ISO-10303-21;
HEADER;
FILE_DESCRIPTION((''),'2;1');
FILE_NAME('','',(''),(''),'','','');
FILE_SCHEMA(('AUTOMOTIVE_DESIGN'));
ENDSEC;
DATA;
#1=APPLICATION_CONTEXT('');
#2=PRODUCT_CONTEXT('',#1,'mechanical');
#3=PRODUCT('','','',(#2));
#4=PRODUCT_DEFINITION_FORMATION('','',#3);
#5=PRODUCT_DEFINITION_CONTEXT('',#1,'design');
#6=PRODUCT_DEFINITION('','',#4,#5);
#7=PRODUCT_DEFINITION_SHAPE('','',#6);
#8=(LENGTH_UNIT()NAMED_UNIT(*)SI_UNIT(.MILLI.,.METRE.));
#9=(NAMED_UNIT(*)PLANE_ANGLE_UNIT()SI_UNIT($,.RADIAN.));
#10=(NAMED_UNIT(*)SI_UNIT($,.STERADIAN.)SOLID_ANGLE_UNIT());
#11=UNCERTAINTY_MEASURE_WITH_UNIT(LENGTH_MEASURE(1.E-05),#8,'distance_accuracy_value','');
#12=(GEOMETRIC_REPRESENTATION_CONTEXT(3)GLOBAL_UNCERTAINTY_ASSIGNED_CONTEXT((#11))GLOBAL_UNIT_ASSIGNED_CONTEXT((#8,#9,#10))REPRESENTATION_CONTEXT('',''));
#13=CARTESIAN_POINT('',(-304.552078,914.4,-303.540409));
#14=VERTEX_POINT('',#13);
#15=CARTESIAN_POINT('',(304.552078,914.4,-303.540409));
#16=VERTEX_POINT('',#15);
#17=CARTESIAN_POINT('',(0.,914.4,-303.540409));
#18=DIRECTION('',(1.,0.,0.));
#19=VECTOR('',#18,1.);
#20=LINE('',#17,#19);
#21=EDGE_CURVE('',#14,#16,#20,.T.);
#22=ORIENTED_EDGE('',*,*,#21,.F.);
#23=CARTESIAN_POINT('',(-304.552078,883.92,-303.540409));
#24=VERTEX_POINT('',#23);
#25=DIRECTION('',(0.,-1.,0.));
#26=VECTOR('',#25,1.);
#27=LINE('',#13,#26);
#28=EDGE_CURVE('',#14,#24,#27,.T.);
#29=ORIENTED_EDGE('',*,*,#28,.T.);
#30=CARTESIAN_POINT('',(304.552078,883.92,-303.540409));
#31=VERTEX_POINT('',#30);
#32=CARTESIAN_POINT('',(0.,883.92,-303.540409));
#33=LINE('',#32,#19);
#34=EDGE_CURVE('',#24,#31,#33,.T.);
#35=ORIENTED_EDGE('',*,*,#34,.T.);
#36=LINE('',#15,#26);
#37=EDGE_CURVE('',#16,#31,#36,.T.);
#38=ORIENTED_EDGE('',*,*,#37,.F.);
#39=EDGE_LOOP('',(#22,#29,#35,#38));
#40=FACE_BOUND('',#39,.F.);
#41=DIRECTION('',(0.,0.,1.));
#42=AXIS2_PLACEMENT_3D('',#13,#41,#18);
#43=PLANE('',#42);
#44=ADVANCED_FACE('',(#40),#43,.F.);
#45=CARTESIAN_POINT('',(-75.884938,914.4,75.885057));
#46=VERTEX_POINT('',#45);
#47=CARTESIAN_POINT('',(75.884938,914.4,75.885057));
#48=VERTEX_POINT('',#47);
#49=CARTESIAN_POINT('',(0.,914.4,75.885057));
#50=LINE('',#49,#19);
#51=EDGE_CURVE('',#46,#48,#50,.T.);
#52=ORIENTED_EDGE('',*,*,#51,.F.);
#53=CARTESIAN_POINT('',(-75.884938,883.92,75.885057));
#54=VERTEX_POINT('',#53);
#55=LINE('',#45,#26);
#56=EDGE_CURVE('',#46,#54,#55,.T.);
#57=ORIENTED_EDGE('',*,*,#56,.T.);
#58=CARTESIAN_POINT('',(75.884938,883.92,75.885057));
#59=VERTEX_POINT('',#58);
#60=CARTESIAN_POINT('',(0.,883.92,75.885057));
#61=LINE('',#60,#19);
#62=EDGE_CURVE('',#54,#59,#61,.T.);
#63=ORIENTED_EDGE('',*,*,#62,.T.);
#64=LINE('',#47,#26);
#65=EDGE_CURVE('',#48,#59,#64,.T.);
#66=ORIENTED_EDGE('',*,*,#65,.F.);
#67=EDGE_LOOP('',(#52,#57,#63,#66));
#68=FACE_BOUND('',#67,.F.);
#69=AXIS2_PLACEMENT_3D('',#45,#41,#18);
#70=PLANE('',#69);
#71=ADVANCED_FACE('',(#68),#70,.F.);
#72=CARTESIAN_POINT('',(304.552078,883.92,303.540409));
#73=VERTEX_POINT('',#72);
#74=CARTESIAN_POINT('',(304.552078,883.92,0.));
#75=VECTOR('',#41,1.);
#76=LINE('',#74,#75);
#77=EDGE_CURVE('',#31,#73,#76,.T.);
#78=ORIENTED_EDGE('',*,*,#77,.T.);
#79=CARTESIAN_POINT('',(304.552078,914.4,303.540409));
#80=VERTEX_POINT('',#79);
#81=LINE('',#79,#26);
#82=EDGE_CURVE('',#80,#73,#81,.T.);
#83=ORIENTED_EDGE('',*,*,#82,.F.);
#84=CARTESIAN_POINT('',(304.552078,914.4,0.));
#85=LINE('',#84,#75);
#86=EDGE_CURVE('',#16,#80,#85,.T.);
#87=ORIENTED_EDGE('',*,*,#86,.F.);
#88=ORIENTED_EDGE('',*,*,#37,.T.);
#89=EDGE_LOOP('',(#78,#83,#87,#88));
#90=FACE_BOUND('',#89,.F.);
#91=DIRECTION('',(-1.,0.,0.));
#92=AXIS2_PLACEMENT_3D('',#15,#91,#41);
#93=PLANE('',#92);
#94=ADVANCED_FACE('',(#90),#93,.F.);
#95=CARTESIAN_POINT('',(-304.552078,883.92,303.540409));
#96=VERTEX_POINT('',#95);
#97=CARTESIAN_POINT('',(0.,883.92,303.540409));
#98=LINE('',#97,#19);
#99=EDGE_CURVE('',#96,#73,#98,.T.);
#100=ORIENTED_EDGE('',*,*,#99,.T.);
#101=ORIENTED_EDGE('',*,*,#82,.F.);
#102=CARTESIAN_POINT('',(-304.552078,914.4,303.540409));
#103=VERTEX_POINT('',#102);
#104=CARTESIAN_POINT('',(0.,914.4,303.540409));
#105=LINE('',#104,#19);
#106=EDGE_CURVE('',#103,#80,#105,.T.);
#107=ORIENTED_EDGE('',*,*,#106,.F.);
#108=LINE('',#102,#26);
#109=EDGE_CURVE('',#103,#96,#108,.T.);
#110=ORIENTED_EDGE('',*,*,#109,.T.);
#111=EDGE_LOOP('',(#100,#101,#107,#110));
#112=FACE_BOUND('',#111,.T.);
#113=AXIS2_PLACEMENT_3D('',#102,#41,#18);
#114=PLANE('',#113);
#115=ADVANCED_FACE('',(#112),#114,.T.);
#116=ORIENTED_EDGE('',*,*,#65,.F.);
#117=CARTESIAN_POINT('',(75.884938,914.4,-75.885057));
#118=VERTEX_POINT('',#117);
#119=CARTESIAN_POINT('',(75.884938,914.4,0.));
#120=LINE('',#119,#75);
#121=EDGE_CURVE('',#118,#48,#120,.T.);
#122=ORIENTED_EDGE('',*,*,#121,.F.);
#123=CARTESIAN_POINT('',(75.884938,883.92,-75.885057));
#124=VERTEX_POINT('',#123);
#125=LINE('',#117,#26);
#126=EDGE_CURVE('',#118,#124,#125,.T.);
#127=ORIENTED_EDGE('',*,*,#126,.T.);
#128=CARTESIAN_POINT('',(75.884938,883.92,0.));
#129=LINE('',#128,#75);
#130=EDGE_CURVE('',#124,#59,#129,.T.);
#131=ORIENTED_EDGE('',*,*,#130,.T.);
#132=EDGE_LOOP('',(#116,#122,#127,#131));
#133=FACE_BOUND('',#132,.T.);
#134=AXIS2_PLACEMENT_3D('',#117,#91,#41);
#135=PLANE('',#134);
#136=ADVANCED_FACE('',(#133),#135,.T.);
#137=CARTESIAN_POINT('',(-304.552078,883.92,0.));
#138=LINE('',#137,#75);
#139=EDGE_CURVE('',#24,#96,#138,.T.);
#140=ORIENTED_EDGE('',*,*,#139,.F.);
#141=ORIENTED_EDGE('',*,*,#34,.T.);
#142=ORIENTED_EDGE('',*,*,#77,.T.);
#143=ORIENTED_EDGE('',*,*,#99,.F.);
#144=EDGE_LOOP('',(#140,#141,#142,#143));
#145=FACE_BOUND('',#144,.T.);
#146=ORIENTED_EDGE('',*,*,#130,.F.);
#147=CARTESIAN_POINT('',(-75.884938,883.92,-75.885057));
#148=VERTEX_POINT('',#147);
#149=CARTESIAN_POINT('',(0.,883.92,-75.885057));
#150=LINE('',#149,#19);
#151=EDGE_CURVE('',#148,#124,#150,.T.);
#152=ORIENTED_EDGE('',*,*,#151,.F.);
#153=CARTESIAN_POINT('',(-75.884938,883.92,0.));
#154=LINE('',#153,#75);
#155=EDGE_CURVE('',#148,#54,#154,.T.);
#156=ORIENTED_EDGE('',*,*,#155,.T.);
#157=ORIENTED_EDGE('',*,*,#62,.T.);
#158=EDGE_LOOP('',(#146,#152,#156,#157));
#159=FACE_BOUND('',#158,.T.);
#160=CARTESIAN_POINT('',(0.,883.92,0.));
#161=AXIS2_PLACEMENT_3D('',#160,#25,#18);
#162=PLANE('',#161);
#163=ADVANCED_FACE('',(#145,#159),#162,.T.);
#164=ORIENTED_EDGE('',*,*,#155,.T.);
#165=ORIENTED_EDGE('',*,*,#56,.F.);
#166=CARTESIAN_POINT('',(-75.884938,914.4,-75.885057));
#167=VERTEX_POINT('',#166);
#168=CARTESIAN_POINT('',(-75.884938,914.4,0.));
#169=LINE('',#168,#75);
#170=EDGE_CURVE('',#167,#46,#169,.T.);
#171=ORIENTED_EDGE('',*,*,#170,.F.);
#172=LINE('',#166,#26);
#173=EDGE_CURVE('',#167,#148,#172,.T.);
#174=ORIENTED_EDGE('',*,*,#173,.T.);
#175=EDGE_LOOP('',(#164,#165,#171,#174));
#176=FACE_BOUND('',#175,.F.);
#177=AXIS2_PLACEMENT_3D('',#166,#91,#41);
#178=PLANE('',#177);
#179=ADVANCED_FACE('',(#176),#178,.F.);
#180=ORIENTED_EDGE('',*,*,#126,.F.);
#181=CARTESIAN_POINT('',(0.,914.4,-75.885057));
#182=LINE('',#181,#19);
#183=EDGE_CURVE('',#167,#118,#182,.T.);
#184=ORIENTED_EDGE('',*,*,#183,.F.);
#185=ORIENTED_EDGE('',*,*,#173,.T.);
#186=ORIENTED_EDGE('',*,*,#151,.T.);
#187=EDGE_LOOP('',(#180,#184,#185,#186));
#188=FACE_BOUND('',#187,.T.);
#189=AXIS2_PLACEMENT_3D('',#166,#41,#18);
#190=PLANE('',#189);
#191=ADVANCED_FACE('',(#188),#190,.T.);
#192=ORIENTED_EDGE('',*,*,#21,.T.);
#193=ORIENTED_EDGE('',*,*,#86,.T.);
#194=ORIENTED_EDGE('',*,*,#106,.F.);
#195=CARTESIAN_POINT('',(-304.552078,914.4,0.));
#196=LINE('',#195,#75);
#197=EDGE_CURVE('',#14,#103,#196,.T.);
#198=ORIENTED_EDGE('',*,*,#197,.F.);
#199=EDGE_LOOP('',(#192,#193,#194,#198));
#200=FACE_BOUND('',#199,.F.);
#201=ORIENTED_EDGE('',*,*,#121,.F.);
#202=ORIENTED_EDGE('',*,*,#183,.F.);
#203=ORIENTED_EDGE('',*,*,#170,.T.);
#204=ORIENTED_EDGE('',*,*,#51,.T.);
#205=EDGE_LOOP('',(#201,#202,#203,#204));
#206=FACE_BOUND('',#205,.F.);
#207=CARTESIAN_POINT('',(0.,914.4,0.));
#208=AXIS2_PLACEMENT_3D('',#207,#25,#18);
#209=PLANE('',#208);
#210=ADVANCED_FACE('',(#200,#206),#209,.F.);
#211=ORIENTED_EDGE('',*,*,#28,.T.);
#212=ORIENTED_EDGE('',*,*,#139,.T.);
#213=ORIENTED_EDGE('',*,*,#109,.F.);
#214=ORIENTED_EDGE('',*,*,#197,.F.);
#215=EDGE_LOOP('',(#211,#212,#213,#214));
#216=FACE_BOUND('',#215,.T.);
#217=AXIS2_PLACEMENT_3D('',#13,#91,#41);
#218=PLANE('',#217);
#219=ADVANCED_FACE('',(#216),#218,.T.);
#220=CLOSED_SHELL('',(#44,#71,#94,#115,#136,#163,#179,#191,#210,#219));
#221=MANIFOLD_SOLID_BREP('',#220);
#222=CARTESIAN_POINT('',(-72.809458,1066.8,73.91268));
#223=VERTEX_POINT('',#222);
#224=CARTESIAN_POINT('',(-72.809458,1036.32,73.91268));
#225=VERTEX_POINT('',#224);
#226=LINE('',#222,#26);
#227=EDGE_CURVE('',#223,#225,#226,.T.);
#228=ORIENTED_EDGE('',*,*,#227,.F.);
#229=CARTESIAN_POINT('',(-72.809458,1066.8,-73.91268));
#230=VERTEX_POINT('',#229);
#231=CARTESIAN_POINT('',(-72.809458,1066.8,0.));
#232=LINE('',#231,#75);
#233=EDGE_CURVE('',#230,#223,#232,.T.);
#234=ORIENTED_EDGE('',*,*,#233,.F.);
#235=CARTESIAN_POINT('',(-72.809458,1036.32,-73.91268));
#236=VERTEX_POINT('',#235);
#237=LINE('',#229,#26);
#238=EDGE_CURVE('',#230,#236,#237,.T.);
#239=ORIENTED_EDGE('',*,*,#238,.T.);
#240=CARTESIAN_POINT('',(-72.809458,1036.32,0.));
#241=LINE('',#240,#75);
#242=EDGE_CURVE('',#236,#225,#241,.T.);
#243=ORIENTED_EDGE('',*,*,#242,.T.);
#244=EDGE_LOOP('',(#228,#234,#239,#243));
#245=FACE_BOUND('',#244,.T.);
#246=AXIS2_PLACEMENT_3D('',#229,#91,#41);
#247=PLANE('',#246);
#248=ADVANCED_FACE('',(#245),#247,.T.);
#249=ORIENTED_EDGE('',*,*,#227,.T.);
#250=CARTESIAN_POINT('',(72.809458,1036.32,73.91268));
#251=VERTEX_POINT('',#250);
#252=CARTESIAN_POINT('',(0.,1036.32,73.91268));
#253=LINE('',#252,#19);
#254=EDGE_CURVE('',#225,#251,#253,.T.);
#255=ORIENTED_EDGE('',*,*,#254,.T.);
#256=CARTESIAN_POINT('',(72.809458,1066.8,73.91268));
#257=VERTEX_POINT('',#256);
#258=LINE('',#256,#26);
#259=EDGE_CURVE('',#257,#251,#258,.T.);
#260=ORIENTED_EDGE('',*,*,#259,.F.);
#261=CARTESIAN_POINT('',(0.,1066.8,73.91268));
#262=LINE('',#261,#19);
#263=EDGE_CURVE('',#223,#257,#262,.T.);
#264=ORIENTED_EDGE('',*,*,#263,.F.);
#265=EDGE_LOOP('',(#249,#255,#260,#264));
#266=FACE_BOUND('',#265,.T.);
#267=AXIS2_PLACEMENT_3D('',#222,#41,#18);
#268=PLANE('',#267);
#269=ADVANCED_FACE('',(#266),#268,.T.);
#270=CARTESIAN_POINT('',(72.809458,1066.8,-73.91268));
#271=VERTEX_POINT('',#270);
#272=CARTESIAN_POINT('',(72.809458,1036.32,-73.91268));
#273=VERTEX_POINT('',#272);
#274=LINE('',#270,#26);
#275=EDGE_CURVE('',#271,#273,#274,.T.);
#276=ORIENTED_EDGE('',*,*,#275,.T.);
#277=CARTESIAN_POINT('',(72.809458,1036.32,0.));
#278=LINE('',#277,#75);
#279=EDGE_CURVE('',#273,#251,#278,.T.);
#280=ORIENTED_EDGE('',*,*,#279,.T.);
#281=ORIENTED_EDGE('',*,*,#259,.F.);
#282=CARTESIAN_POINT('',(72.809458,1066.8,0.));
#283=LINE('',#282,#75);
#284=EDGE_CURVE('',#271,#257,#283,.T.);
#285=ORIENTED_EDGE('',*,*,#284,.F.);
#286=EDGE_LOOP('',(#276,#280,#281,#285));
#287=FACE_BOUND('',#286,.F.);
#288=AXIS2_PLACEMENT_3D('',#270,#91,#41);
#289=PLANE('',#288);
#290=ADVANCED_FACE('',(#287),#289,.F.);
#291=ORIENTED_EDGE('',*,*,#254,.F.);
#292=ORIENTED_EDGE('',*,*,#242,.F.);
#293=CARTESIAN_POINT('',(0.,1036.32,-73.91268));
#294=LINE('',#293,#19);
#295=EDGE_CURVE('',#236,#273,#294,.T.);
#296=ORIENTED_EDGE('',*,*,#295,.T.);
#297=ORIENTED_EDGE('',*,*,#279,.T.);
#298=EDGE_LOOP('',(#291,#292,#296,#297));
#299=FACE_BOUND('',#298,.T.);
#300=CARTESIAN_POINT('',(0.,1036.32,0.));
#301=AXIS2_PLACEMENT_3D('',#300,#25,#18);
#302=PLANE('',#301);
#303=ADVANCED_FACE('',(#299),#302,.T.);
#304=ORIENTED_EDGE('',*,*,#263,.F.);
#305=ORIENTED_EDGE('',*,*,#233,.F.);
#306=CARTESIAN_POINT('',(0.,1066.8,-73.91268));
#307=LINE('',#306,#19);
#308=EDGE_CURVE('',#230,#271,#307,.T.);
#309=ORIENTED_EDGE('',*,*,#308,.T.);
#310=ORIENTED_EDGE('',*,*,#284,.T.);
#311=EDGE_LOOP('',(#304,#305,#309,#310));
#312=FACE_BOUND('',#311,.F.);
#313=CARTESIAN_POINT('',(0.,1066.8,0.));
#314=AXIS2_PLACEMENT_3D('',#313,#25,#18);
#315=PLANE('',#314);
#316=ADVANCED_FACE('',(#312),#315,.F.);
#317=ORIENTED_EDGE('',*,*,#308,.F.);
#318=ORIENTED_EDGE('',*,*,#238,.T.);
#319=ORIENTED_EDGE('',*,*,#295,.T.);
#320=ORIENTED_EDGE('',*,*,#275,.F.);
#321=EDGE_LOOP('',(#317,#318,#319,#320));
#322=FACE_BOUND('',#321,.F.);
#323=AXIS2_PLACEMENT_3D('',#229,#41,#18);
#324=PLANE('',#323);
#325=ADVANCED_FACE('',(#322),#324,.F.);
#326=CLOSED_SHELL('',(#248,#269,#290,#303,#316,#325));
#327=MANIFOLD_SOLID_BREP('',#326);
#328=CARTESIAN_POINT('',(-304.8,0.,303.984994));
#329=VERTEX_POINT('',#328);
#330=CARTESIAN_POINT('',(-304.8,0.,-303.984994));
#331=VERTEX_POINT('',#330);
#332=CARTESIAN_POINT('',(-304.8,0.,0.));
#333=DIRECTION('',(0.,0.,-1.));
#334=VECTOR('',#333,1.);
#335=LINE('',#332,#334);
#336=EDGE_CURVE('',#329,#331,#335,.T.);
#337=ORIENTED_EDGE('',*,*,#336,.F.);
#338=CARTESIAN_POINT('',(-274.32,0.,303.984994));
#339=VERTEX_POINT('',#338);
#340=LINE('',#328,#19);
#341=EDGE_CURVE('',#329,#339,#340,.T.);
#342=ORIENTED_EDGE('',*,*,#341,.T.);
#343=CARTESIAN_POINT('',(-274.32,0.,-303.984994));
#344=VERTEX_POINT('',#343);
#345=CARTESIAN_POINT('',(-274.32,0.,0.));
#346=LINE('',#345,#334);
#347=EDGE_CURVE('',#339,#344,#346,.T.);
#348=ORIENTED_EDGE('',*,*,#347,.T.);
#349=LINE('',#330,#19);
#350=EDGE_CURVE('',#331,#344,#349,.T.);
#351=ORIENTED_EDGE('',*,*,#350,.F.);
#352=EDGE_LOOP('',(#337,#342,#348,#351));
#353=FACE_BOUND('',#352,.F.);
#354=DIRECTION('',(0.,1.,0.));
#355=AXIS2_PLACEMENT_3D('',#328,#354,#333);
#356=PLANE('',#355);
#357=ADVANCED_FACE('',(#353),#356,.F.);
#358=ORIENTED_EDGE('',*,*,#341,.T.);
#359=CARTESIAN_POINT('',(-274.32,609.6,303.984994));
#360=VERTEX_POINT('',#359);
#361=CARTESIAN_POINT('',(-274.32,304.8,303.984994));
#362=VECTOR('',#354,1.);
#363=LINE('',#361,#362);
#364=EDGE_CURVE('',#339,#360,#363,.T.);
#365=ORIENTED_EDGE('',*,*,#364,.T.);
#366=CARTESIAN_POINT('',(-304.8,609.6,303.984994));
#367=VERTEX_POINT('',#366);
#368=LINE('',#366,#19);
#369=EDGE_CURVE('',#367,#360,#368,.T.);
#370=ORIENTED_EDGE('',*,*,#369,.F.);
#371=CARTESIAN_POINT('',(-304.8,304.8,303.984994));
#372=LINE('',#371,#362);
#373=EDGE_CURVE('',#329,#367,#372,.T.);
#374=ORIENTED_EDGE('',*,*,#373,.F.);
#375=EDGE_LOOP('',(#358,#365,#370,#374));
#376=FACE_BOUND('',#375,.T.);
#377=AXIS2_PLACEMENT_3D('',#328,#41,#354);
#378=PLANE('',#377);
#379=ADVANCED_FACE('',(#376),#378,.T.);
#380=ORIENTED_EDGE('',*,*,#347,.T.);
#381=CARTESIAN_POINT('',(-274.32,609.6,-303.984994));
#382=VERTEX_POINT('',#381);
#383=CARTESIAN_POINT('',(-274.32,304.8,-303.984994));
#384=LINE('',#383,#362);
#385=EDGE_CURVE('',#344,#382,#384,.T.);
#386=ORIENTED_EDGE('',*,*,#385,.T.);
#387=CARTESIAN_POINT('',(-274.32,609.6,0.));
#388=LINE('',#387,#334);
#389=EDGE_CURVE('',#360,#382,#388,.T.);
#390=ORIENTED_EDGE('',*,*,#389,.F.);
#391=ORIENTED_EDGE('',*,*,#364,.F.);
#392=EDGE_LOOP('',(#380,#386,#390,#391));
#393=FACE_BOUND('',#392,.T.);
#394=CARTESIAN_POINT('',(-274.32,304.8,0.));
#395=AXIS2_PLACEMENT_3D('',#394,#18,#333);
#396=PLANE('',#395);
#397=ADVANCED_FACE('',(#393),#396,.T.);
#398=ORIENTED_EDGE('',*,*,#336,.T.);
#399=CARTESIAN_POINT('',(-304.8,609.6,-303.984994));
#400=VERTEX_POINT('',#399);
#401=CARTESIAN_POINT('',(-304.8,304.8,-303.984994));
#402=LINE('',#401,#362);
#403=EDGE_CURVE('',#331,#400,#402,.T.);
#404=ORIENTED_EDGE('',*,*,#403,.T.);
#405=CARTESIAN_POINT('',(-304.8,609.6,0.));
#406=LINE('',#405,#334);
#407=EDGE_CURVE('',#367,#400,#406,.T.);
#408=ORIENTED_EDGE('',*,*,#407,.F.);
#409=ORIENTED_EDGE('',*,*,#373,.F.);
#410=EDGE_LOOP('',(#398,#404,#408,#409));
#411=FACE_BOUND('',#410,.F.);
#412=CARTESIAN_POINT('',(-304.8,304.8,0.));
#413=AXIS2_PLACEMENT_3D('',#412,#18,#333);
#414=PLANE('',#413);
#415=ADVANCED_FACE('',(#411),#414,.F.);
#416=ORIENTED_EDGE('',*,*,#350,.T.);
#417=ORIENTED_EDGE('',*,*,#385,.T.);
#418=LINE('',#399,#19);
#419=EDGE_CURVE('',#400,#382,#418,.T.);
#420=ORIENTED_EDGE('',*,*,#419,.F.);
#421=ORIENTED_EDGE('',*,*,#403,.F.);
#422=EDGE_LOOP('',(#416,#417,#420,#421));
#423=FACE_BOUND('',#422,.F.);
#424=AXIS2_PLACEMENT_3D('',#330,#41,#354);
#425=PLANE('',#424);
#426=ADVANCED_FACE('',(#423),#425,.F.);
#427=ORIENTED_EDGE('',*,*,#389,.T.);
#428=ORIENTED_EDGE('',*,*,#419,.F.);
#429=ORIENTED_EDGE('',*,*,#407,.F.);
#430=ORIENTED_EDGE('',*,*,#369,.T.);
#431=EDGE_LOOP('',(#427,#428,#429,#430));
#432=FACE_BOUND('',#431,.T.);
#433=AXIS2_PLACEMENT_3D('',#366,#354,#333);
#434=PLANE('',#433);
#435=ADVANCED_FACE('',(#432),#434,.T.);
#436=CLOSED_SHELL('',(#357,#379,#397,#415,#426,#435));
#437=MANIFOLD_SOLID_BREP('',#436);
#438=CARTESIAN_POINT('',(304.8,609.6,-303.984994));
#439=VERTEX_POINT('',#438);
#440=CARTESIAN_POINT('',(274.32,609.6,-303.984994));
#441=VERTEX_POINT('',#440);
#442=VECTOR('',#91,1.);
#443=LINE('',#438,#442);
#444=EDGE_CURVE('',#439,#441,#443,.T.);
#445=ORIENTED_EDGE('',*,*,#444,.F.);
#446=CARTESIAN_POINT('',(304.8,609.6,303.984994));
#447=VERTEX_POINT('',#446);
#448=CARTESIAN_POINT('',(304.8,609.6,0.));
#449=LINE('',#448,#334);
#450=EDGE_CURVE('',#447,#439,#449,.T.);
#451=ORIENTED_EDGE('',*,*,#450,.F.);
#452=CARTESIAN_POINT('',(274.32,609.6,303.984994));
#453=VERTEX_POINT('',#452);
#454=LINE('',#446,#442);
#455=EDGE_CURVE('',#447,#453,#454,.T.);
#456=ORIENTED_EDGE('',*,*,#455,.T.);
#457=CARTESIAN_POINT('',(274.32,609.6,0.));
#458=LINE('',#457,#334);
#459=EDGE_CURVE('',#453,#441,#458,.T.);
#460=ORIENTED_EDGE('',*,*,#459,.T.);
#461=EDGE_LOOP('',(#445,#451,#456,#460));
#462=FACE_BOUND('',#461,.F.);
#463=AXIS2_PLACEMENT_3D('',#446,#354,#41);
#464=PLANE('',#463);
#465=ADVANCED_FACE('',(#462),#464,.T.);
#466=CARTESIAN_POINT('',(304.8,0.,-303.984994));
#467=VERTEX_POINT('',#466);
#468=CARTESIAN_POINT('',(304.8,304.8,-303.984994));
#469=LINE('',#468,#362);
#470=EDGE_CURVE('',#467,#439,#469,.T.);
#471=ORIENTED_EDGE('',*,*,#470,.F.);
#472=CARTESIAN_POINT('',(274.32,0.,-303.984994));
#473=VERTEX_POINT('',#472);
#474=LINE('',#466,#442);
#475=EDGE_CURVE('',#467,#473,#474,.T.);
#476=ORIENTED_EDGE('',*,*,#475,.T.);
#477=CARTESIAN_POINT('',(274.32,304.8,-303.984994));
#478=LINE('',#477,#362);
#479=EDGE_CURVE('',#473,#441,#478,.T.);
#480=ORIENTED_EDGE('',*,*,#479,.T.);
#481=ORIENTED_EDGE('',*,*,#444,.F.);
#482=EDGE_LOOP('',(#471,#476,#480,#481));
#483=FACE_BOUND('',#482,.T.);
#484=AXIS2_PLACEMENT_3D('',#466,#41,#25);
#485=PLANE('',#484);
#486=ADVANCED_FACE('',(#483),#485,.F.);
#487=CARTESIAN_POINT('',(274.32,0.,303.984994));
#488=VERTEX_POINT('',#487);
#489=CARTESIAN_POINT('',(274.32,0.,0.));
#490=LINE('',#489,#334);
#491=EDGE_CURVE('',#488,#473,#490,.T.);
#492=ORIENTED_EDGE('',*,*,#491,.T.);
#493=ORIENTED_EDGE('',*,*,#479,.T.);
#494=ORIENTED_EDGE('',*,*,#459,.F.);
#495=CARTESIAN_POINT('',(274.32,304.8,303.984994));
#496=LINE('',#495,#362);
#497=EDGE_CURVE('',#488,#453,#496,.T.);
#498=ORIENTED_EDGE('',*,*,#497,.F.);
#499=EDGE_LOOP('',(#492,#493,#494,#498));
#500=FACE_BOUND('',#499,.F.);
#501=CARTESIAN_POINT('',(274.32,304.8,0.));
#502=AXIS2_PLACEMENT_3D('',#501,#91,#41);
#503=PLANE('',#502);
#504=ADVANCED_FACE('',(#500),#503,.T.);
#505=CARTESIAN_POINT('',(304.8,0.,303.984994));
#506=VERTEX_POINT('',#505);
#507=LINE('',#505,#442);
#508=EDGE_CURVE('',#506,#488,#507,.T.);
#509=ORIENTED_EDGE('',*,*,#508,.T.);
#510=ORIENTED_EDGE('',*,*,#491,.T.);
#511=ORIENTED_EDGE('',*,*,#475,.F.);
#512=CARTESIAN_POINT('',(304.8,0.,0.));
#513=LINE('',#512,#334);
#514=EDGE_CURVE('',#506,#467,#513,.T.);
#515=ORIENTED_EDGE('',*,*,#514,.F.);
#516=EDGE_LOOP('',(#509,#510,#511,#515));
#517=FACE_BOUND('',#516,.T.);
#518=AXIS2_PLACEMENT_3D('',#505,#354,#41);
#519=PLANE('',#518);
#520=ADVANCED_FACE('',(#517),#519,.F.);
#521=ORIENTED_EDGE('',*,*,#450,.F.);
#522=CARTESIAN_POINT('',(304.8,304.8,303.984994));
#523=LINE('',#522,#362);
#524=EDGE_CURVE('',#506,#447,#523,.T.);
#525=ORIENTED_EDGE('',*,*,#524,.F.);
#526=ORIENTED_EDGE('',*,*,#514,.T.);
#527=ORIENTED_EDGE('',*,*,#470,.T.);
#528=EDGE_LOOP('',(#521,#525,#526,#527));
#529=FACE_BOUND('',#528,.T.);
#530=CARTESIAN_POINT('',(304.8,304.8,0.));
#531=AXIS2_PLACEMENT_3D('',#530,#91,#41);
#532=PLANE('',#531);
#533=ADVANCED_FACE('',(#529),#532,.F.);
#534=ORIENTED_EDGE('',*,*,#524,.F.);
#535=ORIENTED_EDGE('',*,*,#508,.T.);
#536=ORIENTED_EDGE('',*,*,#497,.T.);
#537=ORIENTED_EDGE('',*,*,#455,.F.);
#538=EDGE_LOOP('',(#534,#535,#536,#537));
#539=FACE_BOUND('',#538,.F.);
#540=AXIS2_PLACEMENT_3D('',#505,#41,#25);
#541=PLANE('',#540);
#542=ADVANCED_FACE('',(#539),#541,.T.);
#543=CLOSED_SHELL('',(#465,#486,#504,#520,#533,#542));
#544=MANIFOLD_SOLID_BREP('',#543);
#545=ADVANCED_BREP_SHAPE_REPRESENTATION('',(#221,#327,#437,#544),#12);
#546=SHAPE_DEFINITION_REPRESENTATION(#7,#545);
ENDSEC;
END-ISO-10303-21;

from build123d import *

# Parameters (mm, degrees)
F3_W      = 609.1041564941
F3_H      = 607.0808172226
F3_W_2    = 151.7698764801
F3_H_2    = 151.7701148987
F4_DEPTH  = 30.48
F1_E10_W  = 607.9699874166
F1_E10_H  = 609.6
F8_DEPTH  = 30.48
F11_W     = 145.6189155579
F11_H     = 147.8253602982
F12_DEPTH = 30.48


# Not quite as in the source:
# - a feature of the source that left no trace in its solid (it failed there, or was rolled back) is left out
# - a pattern or mirror of a feature is missing from the dataset's text; its kind, count and spacing are read off the source's solid
# - the program builds the solid bodies; features that only make, move or delete a surface that nothing else refers to are left out


with BuildPart() as f4:
    # F3 (on offset) → F4 (new body)
    with BuildSketch(Plane.XZ.offset(-914.4)):
        Rectangle(F3_W, F3_H)
        Rectangle(F3_W_2, F3_H_2, mode=Mode.SUBTRACT)
    extrude(amount=F4_DEPTH)


with BuildPart() as f8:
    # F1_E10 (on explicit) → F8 (new body)
    with BuildSketch(Plane(origin=(-304.8, 0, 303.9849937083), x_dir=(0, 0, -1), z_dir=(1, 0, 0))):
        with Locations((303.9849937083, 304.8)):
            Rectangle(F1_E10_W, F1_E10_H)
    extrude(amount=F8_DEPTH)


with BuildPart() as f8_copies_1:
    # F8_copies: instance of F8
    add(f8.part.mirror(Plane(origin=(0, 0, 0), x_dir=(0, 0, 1), z_dir=(1, 0, 0))))


with BuildPart() as f12:
    # F11 (on offset) → F12 (new body)
    with BuildSketch(Plane.XZ.offset(-1066.8)):
        Rectangle(F11_W, F11_H)
    extrude(amount=F12_DEPTH)


solid = Compound([f4.part, f8.part, f8_copies_1.part, f12.part])
